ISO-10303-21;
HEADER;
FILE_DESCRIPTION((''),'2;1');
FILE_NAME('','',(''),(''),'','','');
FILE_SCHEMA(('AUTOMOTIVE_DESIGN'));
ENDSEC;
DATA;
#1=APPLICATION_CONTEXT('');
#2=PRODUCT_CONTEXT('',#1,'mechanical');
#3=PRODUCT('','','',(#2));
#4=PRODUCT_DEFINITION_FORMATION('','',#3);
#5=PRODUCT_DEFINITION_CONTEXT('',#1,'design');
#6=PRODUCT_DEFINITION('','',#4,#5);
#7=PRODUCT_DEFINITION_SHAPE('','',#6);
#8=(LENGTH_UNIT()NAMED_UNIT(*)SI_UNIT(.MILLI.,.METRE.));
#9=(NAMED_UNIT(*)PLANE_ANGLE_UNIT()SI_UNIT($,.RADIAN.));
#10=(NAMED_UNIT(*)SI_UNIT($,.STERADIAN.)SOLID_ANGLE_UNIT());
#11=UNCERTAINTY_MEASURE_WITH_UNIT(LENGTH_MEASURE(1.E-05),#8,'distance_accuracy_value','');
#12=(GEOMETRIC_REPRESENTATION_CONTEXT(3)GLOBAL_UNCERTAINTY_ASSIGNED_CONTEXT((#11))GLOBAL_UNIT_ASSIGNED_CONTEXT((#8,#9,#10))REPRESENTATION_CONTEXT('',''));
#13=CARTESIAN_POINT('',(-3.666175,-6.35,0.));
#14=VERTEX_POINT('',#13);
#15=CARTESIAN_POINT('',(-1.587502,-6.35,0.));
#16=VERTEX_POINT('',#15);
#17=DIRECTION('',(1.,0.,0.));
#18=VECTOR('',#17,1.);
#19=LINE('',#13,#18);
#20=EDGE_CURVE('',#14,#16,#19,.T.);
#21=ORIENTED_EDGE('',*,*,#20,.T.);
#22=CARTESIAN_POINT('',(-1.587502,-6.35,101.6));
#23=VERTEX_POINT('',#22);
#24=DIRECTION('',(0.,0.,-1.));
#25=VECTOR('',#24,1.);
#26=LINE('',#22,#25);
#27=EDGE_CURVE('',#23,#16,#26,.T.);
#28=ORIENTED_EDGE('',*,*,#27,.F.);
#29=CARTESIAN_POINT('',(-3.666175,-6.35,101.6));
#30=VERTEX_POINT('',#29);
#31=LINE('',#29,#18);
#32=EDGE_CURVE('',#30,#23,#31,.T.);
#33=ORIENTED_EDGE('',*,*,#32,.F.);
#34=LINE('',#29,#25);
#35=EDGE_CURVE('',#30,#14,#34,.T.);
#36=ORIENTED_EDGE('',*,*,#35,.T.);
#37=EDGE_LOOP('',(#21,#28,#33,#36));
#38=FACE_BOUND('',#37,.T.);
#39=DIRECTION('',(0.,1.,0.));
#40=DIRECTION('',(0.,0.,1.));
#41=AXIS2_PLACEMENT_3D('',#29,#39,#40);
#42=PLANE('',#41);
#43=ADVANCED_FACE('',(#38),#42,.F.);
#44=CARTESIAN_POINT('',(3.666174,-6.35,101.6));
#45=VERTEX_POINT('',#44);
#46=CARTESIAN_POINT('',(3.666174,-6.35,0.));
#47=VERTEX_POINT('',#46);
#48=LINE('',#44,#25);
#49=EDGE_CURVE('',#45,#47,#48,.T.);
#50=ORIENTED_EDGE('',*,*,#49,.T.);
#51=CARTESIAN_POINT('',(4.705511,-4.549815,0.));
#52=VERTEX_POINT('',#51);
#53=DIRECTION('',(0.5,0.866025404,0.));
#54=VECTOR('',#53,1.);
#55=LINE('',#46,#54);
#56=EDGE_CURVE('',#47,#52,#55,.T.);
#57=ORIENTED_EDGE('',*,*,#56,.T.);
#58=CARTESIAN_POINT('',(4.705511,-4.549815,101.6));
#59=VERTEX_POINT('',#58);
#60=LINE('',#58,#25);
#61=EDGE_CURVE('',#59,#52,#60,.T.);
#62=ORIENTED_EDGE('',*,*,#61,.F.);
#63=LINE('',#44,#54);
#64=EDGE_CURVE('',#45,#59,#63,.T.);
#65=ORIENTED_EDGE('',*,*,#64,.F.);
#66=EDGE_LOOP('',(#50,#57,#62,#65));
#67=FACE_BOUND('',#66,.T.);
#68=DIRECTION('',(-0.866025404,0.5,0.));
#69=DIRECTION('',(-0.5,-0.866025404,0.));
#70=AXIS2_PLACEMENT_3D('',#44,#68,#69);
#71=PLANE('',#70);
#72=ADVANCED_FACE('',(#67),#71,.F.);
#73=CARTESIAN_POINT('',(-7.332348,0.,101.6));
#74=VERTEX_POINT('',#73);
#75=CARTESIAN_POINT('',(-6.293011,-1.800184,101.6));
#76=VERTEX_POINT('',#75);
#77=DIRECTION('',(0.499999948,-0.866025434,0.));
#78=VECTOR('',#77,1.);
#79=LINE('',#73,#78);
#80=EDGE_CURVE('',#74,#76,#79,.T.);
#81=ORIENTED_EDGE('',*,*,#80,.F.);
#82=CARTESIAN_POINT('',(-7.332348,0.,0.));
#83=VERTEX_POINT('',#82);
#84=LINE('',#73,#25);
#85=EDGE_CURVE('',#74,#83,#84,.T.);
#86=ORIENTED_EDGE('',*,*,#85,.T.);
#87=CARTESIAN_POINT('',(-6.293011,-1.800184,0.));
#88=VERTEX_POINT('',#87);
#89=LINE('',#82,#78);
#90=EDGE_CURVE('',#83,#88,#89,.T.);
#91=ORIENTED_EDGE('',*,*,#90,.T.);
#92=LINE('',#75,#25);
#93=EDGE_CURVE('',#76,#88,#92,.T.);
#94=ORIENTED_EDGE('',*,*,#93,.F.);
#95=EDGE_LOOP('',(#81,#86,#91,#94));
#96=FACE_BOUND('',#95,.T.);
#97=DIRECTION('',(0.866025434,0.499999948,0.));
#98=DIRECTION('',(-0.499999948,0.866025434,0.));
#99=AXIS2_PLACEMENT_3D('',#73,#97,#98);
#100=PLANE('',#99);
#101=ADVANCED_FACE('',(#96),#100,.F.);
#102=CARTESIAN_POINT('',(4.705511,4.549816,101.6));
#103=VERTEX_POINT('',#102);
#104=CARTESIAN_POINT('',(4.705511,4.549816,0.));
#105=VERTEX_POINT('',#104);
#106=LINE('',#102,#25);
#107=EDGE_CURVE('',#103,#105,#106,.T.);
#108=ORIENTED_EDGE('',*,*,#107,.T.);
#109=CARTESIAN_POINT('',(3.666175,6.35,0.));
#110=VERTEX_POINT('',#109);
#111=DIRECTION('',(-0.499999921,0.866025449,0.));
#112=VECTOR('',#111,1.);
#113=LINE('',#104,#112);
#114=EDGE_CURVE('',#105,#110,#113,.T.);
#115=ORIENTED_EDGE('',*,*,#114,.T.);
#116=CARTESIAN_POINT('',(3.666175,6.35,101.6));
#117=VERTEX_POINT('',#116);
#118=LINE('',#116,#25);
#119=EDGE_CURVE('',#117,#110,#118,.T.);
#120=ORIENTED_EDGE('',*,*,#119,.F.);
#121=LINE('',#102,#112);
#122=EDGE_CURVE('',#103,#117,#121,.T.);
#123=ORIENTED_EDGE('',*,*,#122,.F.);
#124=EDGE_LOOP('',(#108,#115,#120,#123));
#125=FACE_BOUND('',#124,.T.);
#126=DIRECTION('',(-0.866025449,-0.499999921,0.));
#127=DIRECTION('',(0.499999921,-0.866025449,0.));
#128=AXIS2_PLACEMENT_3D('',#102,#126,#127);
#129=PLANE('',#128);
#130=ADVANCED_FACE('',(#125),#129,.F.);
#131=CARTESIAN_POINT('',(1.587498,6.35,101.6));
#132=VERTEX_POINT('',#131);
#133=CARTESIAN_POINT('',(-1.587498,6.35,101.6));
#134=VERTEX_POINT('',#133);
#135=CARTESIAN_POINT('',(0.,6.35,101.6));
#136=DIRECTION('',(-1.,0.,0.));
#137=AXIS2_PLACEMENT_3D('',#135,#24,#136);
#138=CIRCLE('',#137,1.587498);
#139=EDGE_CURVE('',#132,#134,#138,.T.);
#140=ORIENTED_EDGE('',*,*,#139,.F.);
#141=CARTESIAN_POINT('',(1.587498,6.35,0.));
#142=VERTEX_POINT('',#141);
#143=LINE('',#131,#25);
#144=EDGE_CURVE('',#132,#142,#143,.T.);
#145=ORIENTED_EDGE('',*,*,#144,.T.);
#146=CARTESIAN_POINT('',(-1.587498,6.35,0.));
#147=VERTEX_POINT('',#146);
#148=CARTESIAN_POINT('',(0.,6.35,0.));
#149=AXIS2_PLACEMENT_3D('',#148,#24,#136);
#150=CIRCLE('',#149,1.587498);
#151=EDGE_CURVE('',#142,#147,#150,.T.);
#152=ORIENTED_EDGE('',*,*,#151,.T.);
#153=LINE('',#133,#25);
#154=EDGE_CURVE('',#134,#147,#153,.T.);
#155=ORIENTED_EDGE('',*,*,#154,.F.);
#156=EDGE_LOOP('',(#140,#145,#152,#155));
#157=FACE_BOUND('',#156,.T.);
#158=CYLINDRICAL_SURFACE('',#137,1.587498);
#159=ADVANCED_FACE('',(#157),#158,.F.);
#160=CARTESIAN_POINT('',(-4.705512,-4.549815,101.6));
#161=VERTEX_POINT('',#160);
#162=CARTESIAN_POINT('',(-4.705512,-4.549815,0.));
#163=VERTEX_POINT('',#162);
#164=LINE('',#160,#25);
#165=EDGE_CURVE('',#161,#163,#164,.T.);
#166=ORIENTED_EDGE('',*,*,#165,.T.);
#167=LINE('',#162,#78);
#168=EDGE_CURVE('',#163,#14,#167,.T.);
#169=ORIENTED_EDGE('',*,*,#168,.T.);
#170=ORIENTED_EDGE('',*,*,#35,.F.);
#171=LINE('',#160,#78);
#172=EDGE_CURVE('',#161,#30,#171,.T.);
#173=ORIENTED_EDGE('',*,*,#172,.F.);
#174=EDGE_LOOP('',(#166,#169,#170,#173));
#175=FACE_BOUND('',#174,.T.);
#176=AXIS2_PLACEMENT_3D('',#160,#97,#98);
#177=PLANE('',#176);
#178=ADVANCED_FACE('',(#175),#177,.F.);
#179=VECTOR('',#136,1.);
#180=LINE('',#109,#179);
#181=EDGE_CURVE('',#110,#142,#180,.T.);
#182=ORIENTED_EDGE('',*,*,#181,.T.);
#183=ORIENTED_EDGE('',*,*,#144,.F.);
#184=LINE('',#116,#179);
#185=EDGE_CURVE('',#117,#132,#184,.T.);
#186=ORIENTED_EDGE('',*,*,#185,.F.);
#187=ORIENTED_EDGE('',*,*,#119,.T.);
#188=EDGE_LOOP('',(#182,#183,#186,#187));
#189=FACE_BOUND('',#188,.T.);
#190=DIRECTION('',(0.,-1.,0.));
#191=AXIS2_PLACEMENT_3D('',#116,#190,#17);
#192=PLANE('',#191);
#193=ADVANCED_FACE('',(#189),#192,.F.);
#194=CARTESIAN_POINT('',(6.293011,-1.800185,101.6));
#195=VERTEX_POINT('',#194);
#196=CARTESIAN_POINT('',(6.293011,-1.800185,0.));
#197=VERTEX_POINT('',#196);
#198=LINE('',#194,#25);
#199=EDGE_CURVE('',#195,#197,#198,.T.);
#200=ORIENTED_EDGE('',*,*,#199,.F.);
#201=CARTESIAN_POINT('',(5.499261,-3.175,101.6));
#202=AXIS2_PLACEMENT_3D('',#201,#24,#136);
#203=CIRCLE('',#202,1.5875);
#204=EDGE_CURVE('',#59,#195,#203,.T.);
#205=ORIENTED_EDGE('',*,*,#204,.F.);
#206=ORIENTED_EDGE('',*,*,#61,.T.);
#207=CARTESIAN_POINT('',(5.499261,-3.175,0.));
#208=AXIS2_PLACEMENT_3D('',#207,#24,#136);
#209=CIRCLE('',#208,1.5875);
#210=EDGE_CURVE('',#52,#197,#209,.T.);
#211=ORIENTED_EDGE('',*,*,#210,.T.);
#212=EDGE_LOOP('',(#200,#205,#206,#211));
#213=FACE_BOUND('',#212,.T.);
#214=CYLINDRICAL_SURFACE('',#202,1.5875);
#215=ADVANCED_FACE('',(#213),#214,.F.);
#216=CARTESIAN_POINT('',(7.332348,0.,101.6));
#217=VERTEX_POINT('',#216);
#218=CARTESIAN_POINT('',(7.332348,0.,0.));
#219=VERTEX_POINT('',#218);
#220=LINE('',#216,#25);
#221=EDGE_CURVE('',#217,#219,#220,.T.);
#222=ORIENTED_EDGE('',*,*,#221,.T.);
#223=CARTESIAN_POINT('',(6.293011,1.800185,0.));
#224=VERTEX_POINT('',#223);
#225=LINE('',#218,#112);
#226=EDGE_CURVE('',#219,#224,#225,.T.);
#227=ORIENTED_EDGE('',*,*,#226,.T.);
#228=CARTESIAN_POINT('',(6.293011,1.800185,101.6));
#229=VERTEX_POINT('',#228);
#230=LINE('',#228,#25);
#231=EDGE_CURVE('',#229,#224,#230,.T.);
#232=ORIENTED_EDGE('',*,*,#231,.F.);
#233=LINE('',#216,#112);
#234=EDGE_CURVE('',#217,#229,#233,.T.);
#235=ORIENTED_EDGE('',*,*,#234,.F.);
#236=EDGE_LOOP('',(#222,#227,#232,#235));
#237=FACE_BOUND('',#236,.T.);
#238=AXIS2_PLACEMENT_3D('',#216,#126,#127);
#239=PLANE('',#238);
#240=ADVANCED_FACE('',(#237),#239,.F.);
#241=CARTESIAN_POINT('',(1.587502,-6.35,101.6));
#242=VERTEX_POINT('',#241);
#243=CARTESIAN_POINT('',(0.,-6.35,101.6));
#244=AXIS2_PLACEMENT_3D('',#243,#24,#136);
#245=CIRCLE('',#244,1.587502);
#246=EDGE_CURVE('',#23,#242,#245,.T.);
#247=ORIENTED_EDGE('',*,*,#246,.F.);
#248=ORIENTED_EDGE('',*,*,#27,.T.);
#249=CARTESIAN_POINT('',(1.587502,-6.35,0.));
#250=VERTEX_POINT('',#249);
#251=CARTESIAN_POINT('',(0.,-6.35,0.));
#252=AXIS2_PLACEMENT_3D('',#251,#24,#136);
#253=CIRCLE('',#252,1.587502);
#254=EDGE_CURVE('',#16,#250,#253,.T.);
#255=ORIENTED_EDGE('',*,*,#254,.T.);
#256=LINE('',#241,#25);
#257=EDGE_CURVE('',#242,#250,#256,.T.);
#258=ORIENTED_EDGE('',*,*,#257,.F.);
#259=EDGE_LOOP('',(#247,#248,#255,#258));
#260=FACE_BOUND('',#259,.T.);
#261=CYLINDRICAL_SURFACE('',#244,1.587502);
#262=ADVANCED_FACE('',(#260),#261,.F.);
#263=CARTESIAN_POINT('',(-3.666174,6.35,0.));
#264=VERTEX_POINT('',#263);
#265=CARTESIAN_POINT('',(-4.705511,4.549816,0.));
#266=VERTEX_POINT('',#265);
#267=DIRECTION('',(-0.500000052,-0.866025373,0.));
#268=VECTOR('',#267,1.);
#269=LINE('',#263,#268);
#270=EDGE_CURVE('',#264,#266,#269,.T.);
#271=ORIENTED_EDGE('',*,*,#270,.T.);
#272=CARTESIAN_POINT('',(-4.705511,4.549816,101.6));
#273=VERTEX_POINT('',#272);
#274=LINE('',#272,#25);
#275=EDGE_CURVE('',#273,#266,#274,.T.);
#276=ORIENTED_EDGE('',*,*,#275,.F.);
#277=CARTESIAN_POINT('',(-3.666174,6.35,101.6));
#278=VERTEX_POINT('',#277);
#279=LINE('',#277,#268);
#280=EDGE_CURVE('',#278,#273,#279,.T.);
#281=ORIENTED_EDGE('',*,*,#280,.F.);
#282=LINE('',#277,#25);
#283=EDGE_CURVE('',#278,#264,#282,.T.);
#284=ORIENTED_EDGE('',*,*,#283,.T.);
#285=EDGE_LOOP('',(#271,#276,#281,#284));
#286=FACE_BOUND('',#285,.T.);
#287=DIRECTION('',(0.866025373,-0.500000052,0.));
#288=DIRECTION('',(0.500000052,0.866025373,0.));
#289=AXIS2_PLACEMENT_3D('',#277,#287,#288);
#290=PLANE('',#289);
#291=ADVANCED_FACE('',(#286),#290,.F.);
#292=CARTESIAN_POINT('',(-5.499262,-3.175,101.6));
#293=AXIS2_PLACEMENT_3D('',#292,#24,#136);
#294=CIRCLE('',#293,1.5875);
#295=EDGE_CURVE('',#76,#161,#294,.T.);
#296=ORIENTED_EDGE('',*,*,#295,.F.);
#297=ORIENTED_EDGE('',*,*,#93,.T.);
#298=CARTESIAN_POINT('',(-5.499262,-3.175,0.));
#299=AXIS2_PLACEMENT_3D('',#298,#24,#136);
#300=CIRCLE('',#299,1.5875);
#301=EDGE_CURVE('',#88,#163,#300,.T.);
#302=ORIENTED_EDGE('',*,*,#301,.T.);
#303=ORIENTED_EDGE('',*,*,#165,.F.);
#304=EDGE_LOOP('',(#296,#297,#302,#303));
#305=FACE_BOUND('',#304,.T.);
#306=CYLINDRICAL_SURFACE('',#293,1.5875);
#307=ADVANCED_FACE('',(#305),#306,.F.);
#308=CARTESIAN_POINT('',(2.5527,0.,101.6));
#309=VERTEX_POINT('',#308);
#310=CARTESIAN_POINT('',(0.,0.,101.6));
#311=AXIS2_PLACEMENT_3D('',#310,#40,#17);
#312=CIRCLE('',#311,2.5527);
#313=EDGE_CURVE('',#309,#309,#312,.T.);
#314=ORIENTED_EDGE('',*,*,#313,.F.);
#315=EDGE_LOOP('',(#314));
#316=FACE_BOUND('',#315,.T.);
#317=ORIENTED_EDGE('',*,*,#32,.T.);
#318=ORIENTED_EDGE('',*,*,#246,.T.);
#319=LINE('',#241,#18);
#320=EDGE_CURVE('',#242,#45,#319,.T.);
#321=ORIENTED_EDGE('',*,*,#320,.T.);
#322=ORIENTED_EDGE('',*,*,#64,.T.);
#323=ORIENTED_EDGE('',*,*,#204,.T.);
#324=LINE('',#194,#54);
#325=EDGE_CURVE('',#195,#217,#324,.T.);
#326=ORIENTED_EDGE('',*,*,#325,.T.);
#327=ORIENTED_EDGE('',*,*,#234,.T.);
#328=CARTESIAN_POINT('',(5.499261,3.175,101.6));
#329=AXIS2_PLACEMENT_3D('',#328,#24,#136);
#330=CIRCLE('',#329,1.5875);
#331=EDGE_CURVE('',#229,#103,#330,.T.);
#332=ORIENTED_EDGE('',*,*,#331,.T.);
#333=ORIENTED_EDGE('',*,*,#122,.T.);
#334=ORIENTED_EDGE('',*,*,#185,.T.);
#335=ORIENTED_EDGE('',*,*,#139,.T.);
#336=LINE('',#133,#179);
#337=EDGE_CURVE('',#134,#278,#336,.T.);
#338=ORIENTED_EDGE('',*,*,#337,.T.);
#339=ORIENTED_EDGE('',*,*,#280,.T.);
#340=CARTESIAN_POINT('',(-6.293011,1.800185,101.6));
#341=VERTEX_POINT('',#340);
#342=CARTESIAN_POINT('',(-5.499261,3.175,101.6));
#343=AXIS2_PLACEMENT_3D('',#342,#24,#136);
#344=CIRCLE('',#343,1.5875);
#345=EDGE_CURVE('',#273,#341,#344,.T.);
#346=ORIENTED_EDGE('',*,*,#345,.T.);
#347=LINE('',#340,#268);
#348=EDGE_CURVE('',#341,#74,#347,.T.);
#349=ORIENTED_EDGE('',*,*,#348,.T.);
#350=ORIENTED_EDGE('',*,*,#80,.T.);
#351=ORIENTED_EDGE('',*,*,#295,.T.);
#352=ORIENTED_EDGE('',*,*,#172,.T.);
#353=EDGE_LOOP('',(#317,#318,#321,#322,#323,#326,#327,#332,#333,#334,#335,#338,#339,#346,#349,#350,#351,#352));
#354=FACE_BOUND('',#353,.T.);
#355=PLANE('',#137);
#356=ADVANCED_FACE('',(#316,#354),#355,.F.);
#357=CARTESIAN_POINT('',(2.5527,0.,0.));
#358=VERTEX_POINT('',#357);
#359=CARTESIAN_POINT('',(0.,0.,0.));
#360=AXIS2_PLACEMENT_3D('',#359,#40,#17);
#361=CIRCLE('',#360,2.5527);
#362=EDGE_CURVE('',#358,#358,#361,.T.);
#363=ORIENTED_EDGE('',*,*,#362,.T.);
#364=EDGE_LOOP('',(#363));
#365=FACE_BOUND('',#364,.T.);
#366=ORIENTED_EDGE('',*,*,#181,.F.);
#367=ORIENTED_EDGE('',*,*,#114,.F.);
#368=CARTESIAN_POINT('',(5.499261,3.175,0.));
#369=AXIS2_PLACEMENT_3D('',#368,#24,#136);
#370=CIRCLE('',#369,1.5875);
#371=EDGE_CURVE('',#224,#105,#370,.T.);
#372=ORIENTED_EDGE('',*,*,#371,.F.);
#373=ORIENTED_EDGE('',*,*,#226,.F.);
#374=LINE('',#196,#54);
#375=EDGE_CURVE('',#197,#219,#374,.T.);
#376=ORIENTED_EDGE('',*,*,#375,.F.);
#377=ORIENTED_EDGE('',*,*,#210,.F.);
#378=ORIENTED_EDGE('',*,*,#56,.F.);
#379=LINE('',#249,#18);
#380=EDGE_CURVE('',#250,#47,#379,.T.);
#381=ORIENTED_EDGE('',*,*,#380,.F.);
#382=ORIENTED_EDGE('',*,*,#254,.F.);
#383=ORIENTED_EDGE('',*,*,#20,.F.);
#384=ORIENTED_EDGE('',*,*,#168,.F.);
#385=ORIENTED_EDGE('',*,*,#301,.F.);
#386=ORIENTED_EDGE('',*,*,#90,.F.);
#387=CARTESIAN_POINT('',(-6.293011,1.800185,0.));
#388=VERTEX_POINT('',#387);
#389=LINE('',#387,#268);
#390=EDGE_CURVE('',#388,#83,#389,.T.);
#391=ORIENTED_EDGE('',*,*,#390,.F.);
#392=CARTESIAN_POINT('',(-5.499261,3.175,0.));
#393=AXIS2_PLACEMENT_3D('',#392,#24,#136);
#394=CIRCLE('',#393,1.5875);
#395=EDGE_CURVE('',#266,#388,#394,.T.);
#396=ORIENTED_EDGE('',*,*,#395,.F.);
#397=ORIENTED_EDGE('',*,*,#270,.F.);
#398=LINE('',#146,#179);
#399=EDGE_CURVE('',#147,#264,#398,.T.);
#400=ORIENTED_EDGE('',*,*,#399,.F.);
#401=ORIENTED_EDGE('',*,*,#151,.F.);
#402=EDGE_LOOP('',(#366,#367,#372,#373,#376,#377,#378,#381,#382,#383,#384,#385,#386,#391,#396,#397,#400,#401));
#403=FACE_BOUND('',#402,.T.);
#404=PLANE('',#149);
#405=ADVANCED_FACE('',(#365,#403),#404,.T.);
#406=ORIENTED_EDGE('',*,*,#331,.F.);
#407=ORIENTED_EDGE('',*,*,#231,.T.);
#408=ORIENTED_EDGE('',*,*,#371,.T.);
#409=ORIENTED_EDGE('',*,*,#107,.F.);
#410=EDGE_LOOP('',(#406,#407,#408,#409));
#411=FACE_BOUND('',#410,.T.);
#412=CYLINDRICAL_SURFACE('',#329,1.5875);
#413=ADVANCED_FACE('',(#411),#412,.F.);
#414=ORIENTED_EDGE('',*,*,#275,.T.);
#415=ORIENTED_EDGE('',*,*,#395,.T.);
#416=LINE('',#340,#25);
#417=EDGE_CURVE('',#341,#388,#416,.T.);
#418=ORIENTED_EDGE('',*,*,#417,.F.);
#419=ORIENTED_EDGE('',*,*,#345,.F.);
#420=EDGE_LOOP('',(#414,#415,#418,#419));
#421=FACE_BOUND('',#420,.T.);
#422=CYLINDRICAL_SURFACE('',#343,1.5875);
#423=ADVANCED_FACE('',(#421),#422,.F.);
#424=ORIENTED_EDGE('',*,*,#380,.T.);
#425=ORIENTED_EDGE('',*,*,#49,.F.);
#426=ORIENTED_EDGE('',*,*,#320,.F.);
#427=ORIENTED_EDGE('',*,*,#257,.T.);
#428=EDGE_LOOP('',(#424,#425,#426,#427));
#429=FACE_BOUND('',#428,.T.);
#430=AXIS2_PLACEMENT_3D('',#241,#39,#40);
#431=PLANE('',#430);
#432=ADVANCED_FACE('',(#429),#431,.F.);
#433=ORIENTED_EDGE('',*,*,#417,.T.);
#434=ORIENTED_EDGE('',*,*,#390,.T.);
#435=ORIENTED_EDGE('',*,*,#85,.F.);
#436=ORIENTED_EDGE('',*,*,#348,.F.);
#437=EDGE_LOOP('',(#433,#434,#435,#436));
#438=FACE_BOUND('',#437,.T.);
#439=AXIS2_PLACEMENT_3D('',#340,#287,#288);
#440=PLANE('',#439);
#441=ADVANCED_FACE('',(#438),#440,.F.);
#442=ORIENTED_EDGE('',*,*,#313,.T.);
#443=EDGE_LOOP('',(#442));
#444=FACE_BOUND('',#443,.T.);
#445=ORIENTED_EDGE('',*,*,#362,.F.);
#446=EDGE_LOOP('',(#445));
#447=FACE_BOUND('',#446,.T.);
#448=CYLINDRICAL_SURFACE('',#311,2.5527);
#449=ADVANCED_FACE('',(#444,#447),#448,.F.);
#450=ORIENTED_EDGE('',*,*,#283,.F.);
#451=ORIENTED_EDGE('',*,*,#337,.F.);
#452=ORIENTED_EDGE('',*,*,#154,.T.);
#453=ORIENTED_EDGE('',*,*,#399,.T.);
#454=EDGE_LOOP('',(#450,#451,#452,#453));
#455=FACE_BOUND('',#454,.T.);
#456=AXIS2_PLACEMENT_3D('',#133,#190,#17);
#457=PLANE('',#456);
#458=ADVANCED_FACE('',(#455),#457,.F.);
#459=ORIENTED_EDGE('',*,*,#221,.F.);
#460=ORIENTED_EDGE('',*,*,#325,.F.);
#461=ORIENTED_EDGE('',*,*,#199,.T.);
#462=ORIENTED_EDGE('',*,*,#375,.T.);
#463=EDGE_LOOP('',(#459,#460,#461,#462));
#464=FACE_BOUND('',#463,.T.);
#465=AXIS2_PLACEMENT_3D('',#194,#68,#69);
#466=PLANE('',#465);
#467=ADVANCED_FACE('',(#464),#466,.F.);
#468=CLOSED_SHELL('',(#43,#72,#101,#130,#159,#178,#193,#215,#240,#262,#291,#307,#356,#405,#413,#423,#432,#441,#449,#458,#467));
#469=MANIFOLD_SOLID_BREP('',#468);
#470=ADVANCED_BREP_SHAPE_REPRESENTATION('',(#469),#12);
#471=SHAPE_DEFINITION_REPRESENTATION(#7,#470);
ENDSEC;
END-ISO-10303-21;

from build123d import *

# Parameters (mm, degrees)
BOSS_EXTRUDE1_DEPTH                         = 101.6
SKETCH2_R                                   = 1.5875
CUT_EXTRUDE1_DEPTH                          = 101.6
CBORE_FOR_10_SOCKET_HEAD_CAP_SCREW2_OUT_R   = 2.5527
CBORE_FOR_10_SOCKET_HEAD_CAP_SCREW2_OUT_R_2 = 1.5875
CBORE_FOR_10_SOCKET_HEAD_CAP_SCREW2_DEPTH   = 101.6


# Read off the part's stored shape, not the designer's step: CBORE for #10 Socket Head Cap Screw2
with BuildPart() as part:
    # Sketch1 → Boss-Extrude1 (new body)
    with BuildSketch(Plane.XY):
        with BuildLine():
            Line((-4.70551159, -4.549815043), (-3.666174521, -6.349999904))
            Line((-3.666174521, -6.349999904), (-1.587501923, -6.349999904))
            ThreePointArc((-1.587501923, -6.349999904), (-3.85e-07, -4.762498365), (1.587501923, -6.349999904))
            Line((1.587501923, -6.349999904), (3.666173825, -6.349999904))
            Line((3.666173825, -6.349999904), (4.705510929, -4.549815232))
            ThreePointArc((4.705510929, -4.549815232), (4.124445601, -2.381249904), (6.293010929, -1.800184575))
            Line((6.293010929, -1.800184575), (7.332348034, 9.6e-08))
            Line((7.332348034, 9.6e-08), (6.293011178, 1.800184715))
            ThreePointArc((6.293011178, 1.800184715), (4.124445902, 2.381250241), (4.705511428, 4.549815516))
            Line((4.705511428, 4.549815516), (3.666174521, 6.350000222))
            Line((3.666174521, 6.350000222), (1.587498077, 6.350000222))
            ThreePointArc((1.587498077, 6.350000222), (3.85e-07, 4.76250253), (-1.587498077, 6.350000222))
            Line((-1.587498077, 6.350000222), (-3.666173825, 6.350000222))
            Line((-3.666173825, 6.350000222), (-4.705511038, 4.549815614))
            ThreePointArc((-4.705511038, 4.549815614), (-4.124445841, 2.38125025), (-6.293011205, 1.800185053))
            Line((-6.293011205, 1.800185053), (-7.332348419, 4.44e-07))
            Line((-7.332348419, 4.44e-07), (-6.293011423, -1.80018429))
            ThreePointArc((-6.293011423, -1.80018429), (-4.12444613, -2.38124975), (-4.70551159, -4.549815043))
        make_face()
    extrude(amount=BOSS_EXTRUDE1_DEPTH)

    # Sketch2 → Cut-Extrude1 (cut)
    with BuildSketch(Plane.XY.offset(101.6)):
        Circle(SKETCH2_R)
    extrude(amount=-CUT_EXTRUDE1_DEPTH, mode=Mode.SUBTRACT)

    # CBORE for #10 Socket Head Cap Screw2 out → CBORE for #10 Socket Head Cap Screw2 (cut)
    with BuildSketch(Plane.XY):
        Circle(CBORE_FOR_10_SOCKET_HEAD_CAP_SCREW2_OUT_R)
        Circle(CBORE_FOR_10_SOCKET_HEAD_CAP_SCREW2_OUT_R_2, mode=Mode.SUBTRACT)
    extrude(amount=CBORE_FOR_10_SOCKET_HEAD_CAP_SCREW2_DEPTH, mode=Mode.SUBTRACT)


solid = part.part
